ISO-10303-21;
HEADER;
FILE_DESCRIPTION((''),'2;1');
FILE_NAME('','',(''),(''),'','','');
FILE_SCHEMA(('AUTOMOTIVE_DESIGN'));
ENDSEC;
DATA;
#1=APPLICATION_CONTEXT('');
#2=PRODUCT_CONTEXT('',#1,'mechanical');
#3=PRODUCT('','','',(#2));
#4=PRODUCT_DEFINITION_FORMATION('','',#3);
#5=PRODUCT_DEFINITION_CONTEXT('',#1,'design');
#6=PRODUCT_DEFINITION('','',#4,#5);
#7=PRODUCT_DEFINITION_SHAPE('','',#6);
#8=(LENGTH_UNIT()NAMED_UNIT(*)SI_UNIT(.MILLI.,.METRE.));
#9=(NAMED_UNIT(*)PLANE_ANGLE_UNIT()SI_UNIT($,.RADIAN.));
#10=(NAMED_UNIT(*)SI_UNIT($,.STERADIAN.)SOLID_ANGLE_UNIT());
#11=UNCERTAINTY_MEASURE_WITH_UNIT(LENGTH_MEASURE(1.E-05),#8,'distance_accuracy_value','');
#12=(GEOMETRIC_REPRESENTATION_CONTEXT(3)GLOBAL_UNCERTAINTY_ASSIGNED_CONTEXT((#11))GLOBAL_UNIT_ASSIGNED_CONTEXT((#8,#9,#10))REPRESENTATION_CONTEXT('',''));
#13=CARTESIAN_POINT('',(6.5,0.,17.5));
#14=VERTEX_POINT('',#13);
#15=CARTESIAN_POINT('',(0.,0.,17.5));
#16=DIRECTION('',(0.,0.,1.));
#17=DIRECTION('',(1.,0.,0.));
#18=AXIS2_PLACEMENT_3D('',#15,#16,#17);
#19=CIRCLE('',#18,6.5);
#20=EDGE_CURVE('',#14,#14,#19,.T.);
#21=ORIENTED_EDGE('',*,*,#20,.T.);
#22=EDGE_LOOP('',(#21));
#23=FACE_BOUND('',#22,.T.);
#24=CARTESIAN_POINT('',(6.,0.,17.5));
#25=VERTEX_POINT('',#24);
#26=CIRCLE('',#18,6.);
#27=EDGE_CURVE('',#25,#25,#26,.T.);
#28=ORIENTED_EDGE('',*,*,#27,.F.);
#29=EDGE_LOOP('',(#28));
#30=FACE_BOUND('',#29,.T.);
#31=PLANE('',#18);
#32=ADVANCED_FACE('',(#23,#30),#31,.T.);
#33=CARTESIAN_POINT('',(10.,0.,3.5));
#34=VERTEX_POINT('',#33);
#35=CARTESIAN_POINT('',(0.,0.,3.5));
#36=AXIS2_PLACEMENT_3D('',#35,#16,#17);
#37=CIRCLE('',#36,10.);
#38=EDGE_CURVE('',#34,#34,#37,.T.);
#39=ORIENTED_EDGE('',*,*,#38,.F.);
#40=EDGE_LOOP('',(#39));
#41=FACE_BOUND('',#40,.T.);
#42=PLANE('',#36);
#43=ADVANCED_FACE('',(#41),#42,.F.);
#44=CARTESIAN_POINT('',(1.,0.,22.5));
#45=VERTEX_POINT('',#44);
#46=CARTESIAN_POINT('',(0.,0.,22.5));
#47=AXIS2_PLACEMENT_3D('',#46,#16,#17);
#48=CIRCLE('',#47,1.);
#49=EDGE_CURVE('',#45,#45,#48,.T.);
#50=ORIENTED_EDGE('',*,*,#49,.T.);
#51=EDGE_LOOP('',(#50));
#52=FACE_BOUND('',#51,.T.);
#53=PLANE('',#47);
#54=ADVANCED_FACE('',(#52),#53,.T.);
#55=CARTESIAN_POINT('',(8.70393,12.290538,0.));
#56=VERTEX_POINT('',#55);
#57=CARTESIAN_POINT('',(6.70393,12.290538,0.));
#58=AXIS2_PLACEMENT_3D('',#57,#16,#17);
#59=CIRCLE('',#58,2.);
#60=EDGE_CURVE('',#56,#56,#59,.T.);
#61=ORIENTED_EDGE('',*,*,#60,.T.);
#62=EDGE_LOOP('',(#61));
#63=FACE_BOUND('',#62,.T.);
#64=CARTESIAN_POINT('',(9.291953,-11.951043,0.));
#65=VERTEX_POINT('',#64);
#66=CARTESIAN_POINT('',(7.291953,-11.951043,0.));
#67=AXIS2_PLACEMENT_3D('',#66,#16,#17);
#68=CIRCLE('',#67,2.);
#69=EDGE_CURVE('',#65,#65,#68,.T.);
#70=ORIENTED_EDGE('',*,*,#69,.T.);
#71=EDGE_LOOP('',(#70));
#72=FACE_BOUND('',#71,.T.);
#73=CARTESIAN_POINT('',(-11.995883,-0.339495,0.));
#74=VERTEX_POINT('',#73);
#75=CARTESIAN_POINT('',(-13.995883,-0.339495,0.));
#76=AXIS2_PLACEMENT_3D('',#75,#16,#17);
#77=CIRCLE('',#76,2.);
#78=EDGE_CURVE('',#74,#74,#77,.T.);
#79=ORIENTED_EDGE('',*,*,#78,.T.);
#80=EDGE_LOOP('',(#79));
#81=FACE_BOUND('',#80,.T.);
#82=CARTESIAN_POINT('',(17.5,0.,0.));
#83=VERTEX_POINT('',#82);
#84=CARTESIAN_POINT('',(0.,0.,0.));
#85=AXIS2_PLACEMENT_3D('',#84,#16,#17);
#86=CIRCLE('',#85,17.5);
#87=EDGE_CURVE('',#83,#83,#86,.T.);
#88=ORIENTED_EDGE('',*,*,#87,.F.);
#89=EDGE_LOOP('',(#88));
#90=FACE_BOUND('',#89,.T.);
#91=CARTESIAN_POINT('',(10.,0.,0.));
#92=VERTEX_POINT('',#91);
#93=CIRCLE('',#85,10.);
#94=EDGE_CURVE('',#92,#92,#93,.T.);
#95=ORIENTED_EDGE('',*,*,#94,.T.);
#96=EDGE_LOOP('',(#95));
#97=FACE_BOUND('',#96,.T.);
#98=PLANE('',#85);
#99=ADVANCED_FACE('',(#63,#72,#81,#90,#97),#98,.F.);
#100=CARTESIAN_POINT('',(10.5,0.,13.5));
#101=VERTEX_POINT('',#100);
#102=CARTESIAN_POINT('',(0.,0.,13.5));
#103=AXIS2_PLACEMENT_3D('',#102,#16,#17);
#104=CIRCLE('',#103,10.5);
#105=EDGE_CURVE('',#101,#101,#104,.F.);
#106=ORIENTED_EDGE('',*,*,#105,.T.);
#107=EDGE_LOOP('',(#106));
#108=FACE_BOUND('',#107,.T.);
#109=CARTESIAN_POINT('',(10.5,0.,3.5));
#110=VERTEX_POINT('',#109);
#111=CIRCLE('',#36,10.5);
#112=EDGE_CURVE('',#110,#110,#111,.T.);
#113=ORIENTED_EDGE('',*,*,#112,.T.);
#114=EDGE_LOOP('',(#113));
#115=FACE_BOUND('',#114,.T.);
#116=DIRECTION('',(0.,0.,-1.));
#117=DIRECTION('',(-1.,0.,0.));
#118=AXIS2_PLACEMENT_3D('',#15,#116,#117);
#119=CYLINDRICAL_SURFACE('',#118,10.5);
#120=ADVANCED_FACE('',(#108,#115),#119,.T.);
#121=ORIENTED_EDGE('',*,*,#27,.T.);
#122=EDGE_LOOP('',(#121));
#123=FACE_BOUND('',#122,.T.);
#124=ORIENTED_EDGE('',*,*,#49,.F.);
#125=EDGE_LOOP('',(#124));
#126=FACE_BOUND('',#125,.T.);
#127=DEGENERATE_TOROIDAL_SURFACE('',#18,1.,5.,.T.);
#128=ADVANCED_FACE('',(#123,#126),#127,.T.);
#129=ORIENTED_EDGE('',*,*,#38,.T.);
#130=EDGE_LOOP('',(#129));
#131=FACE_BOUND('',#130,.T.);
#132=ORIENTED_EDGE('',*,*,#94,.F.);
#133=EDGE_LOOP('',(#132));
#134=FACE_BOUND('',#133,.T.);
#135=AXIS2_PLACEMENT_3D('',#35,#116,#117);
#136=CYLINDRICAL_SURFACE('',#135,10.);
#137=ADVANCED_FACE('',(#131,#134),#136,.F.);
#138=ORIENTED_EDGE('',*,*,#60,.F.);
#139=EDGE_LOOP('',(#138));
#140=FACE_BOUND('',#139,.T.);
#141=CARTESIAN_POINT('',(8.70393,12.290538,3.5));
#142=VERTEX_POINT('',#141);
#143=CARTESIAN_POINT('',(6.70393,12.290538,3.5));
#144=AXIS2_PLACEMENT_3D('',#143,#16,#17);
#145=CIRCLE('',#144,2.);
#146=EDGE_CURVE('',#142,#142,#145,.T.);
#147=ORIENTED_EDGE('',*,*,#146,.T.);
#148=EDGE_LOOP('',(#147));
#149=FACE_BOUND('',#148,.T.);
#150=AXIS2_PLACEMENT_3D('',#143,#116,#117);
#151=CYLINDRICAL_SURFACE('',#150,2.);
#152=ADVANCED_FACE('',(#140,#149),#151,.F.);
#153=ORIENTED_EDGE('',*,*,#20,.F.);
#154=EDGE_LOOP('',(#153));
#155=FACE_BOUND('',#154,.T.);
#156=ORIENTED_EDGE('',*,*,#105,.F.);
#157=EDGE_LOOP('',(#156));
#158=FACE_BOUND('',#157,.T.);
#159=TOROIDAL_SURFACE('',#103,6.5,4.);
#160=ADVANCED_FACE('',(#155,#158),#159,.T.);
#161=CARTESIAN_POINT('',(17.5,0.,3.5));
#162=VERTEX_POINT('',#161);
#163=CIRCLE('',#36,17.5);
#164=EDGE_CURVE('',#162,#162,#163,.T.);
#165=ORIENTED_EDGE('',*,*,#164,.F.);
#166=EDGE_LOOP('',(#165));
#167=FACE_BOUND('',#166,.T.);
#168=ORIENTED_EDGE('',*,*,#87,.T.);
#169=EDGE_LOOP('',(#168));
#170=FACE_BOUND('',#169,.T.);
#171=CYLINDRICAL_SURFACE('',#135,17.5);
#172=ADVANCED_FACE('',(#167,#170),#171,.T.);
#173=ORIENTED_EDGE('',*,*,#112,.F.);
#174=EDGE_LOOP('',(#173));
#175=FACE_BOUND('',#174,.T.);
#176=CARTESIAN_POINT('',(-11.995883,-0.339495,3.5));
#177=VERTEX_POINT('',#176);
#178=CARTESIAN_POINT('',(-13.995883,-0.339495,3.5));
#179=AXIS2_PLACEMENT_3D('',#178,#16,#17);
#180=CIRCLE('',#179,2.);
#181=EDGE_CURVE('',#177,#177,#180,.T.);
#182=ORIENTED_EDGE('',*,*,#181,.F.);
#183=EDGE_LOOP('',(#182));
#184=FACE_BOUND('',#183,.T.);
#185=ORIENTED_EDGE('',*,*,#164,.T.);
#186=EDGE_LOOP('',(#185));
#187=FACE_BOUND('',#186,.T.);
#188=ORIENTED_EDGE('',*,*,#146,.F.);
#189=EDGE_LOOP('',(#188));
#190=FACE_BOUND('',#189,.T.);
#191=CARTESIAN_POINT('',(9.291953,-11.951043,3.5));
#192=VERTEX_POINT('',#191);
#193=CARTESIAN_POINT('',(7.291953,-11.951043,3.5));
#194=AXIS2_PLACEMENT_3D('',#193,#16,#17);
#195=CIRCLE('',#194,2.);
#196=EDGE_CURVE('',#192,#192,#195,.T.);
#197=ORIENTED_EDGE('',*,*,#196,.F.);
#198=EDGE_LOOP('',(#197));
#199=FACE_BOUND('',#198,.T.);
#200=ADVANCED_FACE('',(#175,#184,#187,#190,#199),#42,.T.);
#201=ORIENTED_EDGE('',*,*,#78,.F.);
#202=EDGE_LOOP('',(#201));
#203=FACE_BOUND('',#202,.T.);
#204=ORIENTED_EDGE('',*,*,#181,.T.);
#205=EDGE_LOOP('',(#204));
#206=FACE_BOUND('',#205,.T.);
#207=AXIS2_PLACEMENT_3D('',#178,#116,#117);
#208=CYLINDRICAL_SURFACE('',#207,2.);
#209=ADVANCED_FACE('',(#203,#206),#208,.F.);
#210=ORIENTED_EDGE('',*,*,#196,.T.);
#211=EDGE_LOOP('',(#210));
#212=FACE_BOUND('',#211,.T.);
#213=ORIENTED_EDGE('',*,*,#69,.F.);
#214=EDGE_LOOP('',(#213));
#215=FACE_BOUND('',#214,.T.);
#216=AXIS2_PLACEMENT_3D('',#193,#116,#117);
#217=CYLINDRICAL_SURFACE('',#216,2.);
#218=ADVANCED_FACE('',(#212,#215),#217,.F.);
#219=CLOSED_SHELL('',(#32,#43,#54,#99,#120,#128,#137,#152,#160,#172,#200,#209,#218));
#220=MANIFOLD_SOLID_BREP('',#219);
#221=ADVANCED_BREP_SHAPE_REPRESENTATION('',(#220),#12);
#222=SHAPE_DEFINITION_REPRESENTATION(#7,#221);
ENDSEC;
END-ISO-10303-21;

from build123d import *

# Parameters (mm, degrees)
SKETCH1_R           = 17.5
SKETCH1_R_2         = 10
SKETCH1_R_3         = 2
BOSS_EXTRUDE1_DEPTH = 3.5
SKETCH3_R           = 10.5
BOSS_EXTRUDE2_DEPTH = 14
FILLET1_R           = 4
SKETCH4_R           = 6
BOSS_EXTRUDE3_DEPTH = 5
FILLET2_R           = 5


with BuildPart() as part:
    # Sketch1 → Boss-Extrude1 (new body)
    with BuildSketch(Plane.XY):
        Circle(SKETCH1_R)
        Circle(SKETCH1_R_2, mode=Mode.SUBTRACT)
        with Locations((6.70392983, 12.290538021)):
            Circle(SKETCH1_R_3, mode=Mode.SUBTRACT)
        with Locations((7.291953237, -11.951042548)):
            Circle(SKETCH1_R_3, mode=Mode.SUBTRACT)
        with Locations((-13.995883067, -0.339495473)):
            Circle(SKETCH1_R_3, mode=Mode.SUBTRACT)
    extrude(amount=BOSS_EXTRUDE1_DEPTH)

    # Sketch3 → Boss-Extrude2 (add)
    with BuildSketch(Plane.XY.offset(3.5)):
        Circle(SKETCH3_R)
    extrude(amount=BOSS_EXTRUDE2_DEPTH)

    # Fillet1
    fillet1_edges = [part.edges().sort_by_distance(p)[0] for p in [
        (-10.5, 0, 17.5),
    ]]
    fillet(fillet1_edges, radius=FILLET1_R)

    # Sketch4 → Boss-Extrude3 (add)
    with BuildSketch(Plane.XY.offset(17.5)):
        Circle(SKETCH4_R)
    extrude(amount=BOSS_EXTRUDE3_DEPTH)

    # Fillet2
    fillet2_edges = [part.edges().sort_by_distance(p)[0] for p in [
        (-6, 0, 22.5),
    ]]
    fillet(fillet2_edges, radius=FILLET2_R - 0.0001)  # a hair under: the kernel refuses the full size


solid = part.part
